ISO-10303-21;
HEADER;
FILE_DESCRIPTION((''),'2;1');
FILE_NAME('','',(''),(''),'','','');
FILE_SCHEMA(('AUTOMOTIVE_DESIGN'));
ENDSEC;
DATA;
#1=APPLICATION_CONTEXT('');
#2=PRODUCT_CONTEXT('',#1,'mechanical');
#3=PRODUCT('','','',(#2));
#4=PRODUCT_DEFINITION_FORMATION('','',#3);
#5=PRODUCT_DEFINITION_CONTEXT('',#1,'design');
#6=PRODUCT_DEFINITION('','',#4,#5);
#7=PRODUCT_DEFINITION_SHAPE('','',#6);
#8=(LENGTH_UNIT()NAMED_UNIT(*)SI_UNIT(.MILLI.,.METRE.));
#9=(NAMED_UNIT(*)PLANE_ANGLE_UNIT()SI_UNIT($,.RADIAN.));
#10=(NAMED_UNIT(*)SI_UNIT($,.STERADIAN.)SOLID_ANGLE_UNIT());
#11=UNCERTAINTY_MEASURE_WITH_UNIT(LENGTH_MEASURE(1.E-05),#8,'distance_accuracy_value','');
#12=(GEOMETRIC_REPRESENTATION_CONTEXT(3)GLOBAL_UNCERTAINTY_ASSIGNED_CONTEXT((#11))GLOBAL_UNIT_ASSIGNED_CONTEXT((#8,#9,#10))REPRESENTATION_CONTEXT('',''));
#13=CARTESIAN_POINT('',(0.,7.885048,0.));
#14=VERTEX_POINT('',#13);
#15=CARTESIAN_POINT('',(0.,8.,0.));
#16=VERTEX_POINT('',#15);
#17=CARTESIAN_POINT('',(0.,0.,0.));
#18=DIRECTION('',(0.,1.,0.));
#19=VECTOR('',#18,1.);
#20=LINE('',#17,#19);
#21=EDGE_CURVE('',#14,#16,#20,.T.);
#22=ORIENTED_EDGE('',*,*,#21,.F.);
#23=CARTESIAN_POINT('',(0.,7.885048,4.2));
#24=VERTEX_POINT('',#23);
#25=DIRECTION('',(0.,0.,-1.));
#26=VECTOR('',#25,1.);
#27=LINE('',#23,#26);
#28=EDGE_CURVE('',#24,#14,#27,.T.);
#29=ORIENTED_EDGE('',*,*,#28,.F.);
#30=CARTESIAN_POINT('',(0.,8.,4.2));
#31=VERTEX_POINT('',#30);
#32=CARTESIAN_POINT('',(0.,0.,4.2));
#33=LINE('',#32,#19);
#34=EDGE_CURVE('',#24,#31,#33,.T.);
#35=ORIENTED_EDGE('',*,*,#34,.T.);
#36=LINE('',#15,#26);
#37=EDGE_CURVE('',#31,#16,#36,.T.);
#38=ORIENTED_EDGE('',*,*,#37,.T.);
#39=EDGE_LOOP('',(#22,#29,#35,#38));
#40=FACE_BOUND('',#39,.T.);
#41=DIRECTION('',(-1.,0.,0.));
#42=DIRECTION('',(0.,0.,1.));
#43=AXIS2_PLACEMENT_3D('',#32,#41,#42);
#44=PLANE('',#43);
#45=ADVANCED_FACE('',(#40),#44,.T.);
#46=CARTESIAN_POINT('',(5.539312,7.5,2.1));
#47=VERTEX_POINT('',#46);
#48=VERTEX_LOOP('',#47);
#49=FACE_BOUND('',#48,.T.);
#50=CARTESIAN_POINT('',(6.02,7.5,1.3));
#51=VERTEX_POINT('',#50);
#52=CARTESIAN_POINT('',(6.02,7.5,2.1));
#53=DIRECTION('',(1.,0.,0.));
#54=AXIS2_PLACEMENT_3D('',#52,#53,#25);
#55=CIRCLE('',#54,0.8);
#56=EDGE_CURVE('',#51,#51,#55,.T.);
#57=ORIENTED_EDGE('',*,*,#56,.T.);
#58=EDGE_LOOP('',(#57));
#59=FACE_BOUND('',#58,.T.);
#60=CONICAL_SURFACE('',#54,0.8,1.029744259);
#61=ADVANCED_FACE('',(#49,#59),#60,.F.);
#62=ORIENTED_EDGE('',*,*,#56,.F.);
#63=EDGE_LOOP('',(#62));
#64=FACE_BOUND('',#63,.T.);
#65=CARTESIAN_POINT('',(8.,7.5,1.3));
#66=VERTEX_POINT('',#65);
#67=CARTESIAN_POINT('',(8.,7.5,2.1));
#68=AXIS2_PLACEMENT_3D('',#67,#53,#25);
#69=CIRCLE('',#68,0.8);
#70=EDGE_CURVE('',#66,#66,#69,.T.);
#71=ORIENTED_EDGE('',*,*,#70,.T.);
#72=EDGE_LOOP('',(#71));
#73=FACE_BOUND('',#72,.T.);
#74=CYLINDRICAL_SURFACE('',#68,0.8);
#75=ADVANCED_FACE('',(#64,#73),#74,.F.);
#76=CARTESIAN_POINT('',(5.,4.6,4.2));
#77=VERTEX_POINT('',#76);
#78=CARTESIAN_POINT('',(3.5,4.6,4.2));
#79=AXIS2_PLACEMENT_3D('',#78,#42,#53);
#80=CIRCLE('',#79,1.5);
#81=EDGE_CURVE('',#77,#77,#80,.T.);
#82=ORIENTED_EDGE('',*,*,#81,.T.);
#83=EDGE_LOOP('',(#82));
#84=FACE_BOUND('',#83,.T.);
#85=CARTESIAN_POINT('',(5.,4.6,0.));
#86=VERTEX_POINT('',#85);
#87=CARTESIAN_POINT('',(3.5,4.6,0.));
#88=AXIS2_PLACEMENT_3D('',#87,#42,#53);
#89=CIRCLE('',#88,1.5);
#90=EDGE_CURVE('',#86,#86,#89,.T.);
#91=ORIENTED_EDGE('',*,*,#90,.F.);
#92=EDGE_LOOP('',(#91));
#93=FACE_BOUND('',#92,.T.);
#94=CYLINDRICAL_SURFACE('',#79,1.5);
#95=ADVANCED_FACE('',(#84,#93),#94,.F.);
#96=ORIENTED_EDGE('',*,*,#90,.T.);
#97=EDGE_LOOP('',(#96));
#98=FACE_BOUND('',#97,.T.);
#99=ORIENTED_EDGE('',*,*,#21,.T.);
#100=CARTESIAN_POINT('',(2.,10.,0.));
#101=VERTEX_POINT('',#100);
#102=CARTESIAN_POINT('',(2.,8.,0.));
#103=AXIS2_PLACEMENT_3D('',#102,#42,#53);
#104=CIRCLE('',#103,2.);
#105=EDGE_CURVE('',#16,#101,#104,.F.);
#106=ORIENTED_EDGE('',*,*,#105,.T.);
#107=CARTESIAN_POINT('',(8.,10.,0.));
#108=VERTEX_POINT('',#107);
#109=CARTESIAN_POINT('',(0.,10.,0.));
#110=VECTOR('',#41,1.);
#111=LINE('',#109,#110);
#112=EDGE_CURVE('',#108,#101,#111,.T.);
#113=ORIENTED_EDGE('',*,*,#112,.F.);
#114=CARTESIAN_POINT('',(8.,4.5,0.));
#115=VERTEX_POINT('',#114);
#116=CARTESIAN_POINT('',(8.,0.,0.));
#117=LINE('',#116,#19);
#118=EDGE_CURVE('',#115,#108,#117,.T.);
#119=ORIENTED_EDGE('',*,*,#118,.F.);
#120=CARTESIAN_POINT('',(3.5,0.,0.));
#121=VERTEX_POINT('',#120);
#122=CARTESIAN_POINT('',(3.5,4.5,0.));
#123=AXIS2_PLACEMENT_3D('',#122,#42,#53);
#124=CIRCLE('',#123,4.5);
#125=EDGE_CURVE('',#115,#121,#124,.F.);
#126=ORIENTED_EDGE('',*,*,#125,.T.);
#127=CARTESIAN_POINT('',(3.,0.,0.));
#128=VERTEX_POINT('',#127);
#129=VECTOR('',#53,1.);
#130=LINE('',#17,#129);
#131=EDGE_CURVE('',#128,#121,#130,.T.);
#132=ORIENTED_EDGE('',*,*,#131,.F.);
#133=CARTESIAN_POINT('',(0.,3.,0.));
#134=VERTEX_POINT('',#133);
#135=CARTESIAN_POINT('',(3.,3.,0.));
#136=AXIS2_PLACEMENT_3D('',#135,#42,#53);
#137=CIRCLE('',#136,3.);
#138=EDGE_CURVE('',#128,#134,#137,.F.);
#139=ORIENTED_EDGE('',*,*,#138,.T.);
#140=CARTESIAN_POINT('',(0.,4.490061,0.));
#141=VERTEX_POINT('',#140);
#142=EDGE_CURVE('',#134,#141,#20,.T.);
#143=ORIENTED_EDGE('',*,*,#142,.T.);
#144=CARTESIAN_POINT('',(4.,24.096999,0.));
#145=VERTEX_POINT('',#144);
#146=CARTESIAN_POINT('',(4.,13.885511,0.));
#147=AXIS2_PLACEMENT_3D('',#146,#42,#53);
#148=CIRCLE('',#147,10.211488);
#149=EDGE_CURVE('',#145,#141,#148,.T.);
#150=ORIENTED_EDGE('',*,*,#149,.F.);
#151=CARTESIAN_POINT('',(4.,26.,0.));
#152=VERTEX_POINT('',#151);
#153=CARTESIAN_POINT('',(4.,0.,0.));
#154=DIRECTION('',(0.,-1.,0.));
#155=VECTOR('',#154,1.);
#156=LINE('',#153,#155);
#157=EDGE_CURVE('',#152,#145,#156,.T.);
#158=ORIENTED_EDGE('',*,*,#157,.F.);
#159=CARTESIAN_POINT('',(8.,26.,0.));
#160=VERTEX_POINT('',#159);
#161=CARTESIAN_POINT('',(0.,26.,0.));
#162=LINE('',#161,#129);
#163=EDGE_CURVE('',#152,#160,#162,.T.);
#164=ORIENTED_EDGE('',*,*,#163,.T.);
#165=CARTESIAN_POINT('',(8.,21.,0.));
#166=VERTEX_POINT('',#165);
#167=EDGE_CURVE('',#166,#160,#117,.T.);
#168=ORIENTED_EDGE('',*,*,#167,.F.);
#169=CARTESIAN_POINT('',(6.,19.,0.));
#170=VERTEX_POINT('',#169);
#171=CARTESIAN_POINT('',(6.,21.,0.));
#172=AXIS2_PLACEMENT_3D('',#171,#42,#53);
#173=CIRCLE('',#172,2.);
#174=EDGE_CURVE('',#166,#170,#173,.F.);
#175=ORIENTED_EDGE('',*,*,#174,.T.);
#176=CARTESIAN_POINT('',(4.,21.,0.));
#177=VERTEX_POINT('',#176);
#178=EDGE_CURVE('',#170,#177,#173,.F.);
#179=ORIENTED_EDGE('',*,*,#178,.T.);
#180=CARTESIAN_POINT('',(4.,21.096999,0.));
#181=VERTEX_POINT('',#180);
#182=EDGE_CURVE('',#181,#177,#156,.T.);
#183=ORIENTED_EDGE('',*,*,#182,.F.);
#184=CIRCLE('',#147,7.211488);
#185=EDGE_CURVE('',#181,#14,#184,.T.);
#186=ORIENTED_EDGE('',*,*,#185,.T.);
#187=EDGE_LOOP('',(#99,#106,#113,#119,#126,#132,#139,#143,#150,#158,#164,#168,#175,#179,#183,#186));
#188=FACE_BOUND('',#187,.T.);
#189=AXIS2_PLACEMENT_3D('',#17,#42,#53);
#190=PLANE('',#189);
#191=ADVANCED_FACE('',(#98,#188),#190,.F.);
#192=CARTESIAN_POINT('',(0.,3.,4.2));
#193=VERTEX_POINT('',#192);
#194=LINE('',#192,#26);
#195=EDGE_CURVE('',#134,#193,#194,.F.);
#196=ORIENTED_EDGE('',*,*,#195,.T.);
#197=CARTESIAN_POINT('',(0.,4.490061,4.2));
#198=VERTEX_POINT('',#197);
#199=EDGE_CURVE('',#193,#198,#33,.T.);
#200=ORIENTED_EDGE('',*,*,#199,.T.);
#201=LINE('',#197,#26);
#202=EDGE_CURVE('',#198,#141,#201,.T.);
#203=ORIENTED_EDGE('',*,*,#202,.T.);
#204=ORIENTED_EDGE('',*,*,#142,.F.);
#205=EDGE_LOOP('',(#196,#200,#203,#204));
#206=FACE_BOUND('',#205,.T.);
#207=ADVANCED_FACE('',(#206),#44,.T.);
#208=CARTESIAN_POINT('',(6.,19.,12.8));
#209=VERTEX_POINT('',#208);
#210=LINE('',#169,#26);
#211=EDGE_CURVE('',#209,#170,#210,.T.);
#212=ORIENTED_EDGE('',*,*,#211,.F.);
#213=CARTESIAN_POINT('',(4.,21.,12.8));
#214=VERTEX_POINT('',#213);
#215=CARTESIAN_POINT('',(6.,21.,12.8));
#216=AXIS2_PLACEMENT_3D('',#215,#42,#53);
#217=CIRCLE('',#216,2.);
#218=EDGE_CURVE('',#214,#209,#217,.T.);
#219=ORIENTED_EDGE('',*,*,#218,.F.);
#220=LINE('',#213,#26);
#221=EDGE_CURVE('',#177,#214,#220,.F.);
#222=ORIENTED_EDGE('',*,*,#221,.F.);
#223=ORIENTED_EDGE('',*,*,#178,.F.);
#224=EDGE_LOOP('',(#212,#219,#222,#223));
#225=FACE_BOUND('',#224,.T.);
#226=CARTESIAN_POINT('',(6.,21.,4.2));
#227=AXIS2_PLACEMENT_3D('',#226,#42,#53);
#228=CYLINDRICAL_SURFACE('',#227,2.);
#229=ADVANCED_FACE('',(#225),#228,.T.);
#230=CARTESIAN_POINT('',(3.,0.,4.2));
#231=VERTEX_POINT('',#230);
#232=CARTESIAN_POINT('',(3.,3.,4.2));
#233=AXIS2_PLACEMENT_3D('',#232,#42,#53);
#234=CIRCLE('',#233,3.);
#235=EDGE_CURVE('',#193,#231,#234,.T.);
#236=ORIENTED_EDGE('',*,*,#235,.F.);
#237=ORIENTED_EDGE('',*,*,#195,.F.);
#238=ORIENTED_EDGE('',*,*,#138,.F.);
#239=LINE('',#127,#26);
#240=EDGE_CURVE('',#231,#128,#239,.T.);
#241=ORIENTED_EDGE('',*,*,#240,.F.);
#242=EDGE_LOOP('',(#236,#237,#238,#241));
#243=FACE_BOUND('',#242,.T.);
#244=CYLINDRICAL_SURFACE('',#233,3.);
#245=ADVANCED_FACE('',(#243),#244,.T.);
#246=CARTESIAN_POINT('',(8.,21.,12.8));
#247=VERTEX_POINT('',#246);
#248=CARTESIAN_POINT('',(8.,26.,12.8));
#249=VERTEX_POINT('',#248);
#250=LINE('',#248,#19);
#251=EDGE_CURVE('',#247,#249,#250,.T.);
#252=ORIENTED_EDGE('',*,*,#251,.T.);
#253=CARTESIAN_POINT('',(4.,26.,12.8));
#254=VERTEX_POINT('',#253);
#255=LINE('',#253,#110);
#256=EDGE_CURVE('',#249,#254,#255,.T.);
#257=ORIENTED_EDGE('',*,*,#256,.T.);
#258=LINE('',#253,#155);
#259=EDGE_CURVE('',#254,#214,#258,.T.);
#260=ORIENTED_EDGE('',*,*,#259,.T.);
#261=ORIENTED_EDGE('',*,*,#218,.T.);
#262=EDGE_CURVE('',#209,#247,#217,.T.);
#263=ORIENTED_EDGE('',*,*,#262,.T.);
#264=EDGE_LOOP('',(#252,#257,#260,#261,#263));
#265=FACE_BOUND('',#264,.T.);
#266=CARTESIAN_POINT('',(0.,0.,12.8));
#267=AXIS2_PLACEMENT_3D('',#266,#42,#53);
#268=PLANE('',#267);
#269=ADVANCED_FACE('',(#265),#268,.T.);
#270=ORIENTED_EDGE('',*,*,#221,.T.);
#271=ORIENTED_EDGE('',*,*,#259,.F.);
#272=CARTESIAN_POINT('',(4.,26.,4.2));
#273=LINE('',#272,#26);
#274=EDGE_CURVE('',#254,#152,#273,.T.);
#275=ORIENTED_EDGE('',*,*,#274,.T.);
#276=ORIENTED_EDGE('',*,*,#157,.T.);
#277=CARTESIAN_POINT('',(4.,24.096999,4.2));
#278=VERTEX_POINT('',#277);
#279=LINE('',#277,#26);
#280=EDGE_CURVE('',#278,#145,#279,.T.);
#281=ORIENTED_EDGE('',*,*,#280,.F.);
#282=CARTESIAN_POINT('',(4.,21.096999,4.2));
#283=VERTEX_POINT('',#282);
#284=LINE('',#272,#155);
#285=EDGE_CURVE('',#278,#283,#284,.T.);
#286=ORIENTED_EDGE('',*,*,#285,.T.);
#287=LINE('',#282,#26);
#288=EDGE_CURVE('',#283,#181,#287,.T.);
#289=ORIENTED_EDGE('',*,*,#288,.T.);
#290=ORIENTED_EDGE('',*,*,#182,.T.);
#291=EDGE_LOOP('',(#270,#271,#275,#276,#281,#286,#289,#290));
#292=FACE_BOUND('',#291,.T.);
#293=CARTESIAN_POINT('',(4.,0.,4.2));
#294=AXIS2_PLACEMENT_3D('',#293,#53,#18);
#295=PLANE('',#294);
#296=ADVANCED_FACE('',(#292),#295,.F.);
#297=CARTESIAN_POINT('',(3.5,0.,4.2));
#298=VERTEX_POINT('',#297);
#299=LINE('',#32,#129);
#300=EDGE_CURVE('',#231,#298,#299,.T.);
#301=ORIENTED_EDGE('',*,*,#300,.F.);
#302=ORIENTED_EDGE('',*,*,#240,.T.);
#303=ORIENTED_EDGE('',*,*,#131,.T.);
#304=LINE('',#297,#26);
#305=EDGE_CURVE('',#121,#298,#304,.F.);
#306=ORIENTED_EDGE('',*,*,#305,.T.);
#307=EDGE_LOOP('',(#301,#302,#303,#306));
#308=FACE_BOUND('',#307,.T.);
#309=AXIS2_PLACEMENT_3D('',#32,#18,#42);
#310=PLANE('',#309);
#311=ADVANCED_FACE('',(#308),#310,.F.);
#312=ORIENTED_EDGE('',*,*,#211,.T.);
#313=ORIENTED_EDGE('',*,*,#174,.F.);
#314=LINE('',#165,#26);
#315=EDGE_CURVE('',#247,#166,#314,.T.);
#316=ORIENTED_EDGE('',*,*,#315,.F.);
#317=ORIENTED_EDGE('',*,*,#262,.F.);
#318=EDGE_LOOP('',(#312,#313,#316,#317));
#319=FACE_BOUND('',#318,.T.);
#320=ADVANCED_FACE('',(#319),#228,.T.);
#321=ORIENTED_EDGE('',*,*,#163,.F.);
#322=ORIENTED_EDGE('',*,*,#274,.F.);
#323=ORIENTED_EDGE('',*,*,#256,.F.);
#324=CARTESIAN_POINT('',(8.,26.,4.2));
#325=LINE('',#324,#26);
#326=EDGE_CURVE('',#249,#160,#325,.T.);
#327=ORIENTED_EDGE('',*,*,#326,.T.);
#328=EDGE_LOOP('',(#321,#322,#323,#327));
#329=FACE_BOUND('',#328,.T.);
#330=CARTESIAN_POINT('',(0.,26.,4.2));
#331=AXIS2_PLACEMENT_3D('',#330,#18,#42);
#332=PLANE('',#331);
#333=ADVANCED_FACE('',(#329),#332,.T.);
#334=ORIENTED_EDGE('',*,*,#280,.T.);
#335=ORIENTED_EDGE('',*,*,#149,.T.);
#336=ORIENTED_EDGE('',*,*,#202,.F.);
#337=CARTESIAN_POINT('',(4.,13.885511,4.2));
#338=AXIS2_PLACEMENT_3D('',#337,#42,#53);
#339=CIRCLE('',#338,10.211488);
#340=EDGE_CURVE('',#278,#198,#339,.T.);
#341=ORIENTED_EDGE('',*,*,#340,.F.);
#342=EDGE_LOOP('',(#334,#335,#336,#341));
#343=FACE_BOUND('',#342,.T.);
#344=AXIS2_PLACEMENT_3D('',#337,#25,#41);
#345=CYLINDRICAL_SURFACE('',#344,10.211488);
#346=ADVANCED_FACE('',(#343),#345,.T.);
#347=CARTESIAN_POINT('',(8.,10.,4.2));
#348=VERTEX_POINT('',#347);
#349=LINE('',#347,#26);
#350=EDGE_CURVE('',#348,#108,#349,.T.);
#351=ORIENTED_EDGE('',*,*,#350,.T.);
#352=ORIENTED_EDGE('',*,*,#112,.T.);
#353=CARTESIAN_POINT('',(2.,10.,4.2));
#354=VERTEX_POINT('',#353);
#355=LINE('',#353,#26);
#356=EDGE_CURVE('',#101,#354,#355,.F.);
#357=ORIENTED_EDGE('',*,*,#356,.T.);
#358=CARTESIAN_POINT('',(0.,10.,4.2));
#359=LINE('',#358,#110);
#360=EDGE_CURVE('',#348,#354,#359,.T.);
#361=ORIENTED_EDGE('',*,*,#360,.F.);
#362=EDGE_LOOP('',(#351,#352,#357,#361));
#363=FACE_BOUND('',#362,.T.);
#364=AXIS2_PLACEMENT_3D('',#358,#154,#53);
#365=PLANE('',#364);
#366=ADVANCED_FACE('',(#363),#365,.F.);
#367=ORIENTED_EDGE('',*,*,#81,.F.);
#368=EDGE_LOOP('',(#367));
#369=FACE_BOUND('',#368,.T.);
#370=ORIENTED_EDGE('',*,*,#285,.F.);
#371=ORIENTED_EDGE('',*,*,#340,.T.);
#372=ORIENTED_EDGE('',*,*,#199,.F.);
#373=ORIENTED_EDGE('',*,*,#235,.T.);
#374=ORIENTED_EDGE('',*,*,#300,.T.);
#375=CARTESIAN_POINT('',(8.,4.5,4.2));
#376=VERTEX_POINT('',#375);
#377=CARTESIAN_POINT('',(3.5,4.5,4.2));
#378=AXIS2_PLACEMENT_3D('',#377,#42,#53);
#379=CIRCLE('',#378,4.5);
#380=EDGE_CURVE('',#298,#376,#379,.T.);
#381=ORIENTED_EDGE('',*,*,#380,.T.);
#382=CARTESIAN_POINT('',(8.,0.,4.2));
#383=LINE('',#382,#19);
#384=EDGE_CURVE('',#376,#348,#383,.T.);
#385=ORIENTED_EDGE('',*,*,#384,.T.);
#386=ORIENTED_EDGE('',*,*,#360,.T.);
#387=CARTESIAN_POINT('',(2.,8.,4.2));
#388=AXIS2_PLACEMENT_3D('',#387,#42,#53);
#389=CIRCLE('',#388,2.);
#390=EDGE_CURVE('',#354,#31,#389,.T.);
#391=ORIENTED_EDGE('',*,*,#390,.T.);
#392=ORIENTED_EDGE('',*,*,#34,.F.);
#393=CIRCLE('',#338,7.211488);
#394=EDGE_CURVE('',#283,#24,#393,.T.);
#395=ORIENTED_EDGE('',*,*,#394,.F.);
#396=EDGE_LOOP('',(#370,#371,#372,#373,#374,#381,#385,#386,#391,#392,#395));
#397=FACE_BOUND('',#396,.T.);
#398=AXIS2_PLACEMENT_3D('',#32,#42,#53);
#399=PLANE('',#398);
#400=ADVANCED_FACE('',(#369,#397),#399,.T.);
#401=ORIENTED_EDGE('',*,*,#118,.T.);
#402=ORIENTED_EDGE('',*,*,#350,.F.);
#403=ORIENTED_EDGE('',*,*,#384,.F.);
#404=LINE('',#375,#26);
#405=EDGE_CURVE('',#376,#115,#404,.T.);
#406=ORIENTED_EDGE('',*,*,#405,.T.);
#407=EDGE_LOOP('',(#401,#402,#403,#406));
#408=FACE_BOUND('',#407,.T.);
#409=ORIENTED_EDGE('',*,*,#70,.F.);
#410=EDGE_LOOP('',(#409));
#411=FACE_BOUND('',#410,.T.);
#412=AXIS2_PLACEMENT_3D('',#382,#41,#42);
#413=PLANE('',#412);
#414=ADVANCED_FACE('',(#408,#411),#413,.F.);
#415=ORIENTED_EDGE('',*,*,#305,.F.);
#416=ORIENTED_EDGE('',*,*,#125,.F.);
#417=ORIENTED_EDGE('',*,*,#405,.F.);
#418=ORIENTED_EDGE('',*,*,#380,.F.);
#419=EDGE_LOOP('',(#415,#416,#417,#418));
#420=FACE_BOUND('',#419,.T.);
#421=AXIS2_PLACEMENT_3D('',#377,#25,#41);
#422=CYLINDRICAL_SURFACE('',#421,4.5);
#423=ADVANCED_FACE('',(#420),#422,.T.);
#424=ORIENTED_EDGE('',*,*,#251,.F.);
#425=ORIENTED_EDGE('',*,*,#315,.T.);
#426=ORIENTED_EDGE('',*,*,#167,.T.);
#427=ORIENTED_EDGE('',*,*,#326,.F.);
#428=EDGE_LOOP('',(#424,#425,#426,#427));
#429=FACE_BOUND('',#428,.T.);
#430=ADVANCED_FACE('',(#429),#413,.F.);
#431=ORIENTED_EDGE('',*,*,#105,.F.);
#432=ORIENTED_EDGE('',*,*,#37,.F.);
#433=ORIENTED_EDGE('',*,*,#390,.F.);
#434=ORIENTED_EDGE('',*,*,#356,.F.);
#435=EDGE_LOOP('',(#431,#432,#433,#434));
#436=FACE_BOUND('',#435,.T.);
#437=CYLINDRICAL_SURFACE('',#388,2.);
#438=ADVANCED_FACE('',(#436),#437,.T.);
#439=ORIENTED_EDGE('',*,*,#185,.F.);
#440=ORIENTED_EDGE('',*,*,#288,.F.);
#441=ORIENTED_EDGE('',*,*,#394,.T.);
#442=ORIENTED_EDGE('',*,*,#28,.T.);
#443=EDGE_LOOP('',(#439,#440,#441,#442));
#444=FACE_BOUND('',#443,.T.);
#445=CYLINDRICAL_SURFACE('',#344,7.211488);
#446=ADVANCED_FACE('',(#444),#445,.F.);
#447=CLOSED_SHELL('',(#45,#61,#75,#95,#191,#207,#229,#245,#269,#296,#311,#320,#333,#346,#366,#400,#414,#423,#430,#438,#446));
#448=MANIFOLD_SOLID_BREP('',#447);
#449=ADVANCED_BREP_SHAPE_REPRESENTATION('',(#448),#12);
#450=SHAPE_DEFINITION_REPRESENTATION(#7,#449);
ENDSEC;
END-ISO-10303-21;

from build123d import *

# Parameters (mm, degrees)
BOSS_EXTRUDE1_DEPTH             = 4.2
SKETCH2_W                       = 4
SKETCH2_H                       = 7
BOSS_EXTRUDE2_DEPTH             = 8.6
FILLET1_R                       = 4.5
HOLE1_D                         = 3
HOLE1_DEPTH                     = 100
FILLET3_R                       = 2
FILLET4_R                       = 2
FILLET5_R                       = 3
TAP_DRILL_FOR_M2X0_4_TAP1_D     = 1.6
TAP_DRILL_FOR_M2X0_4_TAP1_DEPTH = 1.98
TAP_DRILL_FOR_M2X0_4_TAP1_TIP   = 0.480688495


with BuildPart() as part:
    # Sketch1 → Boss-Extrude1 (new body)
    with BuildSketch(Plane.XY):
        with BuildLine():
            Line((4, 26), (4, 24.096998671))
            ThreePointArc((4, 24.096998671), (6.041195573, 23.890909602), (8, 23.280961007))
            Line((8, 23.280961007), (8, 26))
            Line((8, 26), (4, 26))
        make_face()
        with BuildLine():
            ThreePointArc((8, 23.280961007), (6.041195573, 23.890909602), (4, 24.096998671))
            Line((4, 24.096998671), (4, 21.096998671))
            ThreePointArc((4, 21.096998671), (6.089651945, 20.787605561), (8, 19.885973898))
            Line((8, 19.885973898), (8, 23.280961007))
        make_face()
        with BuildLine():
            ThreePointArc((8, 19.885973898), (6.089651945, 20.787605561), (4, 21.096998671))
            Line((4, 21.096998671), (4, 19))
            Line((4, 19), (8, 19))
            Line((8, 19), (8, 19.885973898))
        make_face()
        with BuildLine():
            Line((4, 21.096998671), (4, 24.096998671))
            ThreePointArc((4, 24.096998671), (1.958804427, 23.890909602), (0, 23.280961007))
            Line((0, 23.280961007), (0, 19.885973898))
            ThreePointArc((0, 19.885973898), (1.910348055, 20.787605561), (4, 21.096998671))
        make_face()
        with BuildLine():
            Line((0, 7.885047636), (0, 4.490060527))
            ThreePointArc((0, 4.490060527), (1.958804427, 3.880111932), (4, 3.674022863))
            Line((4, 3.674022863), (4, 6.674022863))
            ThreePointArc((4, 6.674022863), (1.910348055, 6.983415973), (0, 7.885047636))
        make_face()
        with BuildLine():
            Line((0, 19.885973898), (0, 23.280961007))
            ThreePointArc((0, 23.280961007), (-6.211487904, 13.885510767), (0, 4.490060527))
            Line((0, 4.490060527), (0, 7.885047636))
            ThreePointArc((0, 7.885047636), (-3.211487904, 13.885510767), (0, 19.885973898))
        make_face()
        with BuildLine():
            ThreePointArc((4, 3.674022863), (1.958804427, 3.880111932), (0, 4.490060527))
            Line((0, 4.490060527), (0, 0))
            Line((0, 0), (8, 0))
            Line((8, 0), (8, 4.490060527))
            ThreePointArc((8, 4.490060527), (6.041195573, 3.880111932), (4, 3.674022863))
        make_face()
        with BuildLine():
            Line((8, 10), (4, 10))
            Line((4, 10), (4, 6.674022863))
            ThreePointArc((4, 6.674022863), (6.089651945, 6.983415973), (8, 7.885047636))
            Line((8, 7.885047636), (8, 10))
        make_face()
        with BuildLine():
            Line((4, 6.674022863), (4, 10))
            Line((4, 10), (0, 10))
            Line((0, 10), (0, 7.885047636))
            ThreePointArc((0, 7.885047636), (1.910348055, 6.983415973), (4, 6.674022863))
        make_face()
        with BuildLine():
            ThreePointArc((4, 3.674022863), (6.041195573, 3.880111932), (8, 4.490060527))
            Line((8, 4.490060527), (8, 7.885047636))
            ThreePointArc((8, 7.885047636), (6.089651945, 6.983415973), (4, 6.674022863))
            Line((4, 6.674022863), (4, 3.674022863))
        make_face()
    extrude(amount=BOSS_EXTRUDE1_DEPTH)

    # Sketch2 → Boss-Extrude2 (add)
    with BuildSketch(Plane.XY.offset(4.2)):
        with Locations((6, 22.5)):
            Rectangle(SKETCH2_W, SKETCH2_H)
    extrude(amount=BOSS_EXTRUDE2_DEPTH)

    # Fillet1
    fillet1_edges = [part.edges().sort_by_distance(p)[0] for p in [
        (8, 0, 2.1),
    ]]
    fillet(fillet1_edges, radius=FILLET1_R)

    # Hole1
    with Locations(Plane(origin=(3.5, 4.6, 4.2), x_dir=(1, 0, 0), z_dir=(0, 0, 1))):
        with Locations((0, 0)):
            Hole(HOLE1_D / 2, depth=HOLE1_DEPTH)

    # Fillet3
    fillet3_edges = [part.edges().sort_by_distance(p)[0] for p in [
        (0, 10, 2.1),
    ]]
    fillet(fillet3_edges, radius=FILLET3_R)

    # Fillet4
    fillet4_edges = [part.edges().sort_by_distance(p)[0] for p in [
        (8, 19, 6.4),
        (4, 19, 6.4),
    ]]
    fillet(fillet4_edges, radius=FILLET4_R - 0.0001)  # a hair under: the kernel refuses the full size

    # Fillet5
    fillet5_edges = [part.edges().sort_by_distance(p)[0] for p in [
        (0, 0, 2.1),
    ]]
    fillet(fillet5_edges, radius=FILLET5_R)

    # Tap Drill for M2x0.4 Tap1
    with Locations(Plane(origin=(8, 7.5, 2.1), x_dir=(0, 0, 1), z_dir=(1, 0, 0))):
        with Locations((0, 0)):
            Hole(TAP_DRILL_FOR_M2X0_4_TAP1_D / 2, depth=TAP_DRILL_FOR_M2X0_4_TAP1_DEPTH)
            with Locations((0, 0, -(TAP_DRILL_FOR_M2X0_4_TAP1_DEPTH + TAP_DRILL_FOR_M2X0_4_TAP1_TIP / 2))):  # 118° drill point
                Cone(0, TAP_DRILL_FOR_M2X0_4_TAP1_D / 2, TAP_DRILL_FOR_M2X0_4_TAP1_TIP, mode=Mode.SUBTRACT)


solid = part.part
